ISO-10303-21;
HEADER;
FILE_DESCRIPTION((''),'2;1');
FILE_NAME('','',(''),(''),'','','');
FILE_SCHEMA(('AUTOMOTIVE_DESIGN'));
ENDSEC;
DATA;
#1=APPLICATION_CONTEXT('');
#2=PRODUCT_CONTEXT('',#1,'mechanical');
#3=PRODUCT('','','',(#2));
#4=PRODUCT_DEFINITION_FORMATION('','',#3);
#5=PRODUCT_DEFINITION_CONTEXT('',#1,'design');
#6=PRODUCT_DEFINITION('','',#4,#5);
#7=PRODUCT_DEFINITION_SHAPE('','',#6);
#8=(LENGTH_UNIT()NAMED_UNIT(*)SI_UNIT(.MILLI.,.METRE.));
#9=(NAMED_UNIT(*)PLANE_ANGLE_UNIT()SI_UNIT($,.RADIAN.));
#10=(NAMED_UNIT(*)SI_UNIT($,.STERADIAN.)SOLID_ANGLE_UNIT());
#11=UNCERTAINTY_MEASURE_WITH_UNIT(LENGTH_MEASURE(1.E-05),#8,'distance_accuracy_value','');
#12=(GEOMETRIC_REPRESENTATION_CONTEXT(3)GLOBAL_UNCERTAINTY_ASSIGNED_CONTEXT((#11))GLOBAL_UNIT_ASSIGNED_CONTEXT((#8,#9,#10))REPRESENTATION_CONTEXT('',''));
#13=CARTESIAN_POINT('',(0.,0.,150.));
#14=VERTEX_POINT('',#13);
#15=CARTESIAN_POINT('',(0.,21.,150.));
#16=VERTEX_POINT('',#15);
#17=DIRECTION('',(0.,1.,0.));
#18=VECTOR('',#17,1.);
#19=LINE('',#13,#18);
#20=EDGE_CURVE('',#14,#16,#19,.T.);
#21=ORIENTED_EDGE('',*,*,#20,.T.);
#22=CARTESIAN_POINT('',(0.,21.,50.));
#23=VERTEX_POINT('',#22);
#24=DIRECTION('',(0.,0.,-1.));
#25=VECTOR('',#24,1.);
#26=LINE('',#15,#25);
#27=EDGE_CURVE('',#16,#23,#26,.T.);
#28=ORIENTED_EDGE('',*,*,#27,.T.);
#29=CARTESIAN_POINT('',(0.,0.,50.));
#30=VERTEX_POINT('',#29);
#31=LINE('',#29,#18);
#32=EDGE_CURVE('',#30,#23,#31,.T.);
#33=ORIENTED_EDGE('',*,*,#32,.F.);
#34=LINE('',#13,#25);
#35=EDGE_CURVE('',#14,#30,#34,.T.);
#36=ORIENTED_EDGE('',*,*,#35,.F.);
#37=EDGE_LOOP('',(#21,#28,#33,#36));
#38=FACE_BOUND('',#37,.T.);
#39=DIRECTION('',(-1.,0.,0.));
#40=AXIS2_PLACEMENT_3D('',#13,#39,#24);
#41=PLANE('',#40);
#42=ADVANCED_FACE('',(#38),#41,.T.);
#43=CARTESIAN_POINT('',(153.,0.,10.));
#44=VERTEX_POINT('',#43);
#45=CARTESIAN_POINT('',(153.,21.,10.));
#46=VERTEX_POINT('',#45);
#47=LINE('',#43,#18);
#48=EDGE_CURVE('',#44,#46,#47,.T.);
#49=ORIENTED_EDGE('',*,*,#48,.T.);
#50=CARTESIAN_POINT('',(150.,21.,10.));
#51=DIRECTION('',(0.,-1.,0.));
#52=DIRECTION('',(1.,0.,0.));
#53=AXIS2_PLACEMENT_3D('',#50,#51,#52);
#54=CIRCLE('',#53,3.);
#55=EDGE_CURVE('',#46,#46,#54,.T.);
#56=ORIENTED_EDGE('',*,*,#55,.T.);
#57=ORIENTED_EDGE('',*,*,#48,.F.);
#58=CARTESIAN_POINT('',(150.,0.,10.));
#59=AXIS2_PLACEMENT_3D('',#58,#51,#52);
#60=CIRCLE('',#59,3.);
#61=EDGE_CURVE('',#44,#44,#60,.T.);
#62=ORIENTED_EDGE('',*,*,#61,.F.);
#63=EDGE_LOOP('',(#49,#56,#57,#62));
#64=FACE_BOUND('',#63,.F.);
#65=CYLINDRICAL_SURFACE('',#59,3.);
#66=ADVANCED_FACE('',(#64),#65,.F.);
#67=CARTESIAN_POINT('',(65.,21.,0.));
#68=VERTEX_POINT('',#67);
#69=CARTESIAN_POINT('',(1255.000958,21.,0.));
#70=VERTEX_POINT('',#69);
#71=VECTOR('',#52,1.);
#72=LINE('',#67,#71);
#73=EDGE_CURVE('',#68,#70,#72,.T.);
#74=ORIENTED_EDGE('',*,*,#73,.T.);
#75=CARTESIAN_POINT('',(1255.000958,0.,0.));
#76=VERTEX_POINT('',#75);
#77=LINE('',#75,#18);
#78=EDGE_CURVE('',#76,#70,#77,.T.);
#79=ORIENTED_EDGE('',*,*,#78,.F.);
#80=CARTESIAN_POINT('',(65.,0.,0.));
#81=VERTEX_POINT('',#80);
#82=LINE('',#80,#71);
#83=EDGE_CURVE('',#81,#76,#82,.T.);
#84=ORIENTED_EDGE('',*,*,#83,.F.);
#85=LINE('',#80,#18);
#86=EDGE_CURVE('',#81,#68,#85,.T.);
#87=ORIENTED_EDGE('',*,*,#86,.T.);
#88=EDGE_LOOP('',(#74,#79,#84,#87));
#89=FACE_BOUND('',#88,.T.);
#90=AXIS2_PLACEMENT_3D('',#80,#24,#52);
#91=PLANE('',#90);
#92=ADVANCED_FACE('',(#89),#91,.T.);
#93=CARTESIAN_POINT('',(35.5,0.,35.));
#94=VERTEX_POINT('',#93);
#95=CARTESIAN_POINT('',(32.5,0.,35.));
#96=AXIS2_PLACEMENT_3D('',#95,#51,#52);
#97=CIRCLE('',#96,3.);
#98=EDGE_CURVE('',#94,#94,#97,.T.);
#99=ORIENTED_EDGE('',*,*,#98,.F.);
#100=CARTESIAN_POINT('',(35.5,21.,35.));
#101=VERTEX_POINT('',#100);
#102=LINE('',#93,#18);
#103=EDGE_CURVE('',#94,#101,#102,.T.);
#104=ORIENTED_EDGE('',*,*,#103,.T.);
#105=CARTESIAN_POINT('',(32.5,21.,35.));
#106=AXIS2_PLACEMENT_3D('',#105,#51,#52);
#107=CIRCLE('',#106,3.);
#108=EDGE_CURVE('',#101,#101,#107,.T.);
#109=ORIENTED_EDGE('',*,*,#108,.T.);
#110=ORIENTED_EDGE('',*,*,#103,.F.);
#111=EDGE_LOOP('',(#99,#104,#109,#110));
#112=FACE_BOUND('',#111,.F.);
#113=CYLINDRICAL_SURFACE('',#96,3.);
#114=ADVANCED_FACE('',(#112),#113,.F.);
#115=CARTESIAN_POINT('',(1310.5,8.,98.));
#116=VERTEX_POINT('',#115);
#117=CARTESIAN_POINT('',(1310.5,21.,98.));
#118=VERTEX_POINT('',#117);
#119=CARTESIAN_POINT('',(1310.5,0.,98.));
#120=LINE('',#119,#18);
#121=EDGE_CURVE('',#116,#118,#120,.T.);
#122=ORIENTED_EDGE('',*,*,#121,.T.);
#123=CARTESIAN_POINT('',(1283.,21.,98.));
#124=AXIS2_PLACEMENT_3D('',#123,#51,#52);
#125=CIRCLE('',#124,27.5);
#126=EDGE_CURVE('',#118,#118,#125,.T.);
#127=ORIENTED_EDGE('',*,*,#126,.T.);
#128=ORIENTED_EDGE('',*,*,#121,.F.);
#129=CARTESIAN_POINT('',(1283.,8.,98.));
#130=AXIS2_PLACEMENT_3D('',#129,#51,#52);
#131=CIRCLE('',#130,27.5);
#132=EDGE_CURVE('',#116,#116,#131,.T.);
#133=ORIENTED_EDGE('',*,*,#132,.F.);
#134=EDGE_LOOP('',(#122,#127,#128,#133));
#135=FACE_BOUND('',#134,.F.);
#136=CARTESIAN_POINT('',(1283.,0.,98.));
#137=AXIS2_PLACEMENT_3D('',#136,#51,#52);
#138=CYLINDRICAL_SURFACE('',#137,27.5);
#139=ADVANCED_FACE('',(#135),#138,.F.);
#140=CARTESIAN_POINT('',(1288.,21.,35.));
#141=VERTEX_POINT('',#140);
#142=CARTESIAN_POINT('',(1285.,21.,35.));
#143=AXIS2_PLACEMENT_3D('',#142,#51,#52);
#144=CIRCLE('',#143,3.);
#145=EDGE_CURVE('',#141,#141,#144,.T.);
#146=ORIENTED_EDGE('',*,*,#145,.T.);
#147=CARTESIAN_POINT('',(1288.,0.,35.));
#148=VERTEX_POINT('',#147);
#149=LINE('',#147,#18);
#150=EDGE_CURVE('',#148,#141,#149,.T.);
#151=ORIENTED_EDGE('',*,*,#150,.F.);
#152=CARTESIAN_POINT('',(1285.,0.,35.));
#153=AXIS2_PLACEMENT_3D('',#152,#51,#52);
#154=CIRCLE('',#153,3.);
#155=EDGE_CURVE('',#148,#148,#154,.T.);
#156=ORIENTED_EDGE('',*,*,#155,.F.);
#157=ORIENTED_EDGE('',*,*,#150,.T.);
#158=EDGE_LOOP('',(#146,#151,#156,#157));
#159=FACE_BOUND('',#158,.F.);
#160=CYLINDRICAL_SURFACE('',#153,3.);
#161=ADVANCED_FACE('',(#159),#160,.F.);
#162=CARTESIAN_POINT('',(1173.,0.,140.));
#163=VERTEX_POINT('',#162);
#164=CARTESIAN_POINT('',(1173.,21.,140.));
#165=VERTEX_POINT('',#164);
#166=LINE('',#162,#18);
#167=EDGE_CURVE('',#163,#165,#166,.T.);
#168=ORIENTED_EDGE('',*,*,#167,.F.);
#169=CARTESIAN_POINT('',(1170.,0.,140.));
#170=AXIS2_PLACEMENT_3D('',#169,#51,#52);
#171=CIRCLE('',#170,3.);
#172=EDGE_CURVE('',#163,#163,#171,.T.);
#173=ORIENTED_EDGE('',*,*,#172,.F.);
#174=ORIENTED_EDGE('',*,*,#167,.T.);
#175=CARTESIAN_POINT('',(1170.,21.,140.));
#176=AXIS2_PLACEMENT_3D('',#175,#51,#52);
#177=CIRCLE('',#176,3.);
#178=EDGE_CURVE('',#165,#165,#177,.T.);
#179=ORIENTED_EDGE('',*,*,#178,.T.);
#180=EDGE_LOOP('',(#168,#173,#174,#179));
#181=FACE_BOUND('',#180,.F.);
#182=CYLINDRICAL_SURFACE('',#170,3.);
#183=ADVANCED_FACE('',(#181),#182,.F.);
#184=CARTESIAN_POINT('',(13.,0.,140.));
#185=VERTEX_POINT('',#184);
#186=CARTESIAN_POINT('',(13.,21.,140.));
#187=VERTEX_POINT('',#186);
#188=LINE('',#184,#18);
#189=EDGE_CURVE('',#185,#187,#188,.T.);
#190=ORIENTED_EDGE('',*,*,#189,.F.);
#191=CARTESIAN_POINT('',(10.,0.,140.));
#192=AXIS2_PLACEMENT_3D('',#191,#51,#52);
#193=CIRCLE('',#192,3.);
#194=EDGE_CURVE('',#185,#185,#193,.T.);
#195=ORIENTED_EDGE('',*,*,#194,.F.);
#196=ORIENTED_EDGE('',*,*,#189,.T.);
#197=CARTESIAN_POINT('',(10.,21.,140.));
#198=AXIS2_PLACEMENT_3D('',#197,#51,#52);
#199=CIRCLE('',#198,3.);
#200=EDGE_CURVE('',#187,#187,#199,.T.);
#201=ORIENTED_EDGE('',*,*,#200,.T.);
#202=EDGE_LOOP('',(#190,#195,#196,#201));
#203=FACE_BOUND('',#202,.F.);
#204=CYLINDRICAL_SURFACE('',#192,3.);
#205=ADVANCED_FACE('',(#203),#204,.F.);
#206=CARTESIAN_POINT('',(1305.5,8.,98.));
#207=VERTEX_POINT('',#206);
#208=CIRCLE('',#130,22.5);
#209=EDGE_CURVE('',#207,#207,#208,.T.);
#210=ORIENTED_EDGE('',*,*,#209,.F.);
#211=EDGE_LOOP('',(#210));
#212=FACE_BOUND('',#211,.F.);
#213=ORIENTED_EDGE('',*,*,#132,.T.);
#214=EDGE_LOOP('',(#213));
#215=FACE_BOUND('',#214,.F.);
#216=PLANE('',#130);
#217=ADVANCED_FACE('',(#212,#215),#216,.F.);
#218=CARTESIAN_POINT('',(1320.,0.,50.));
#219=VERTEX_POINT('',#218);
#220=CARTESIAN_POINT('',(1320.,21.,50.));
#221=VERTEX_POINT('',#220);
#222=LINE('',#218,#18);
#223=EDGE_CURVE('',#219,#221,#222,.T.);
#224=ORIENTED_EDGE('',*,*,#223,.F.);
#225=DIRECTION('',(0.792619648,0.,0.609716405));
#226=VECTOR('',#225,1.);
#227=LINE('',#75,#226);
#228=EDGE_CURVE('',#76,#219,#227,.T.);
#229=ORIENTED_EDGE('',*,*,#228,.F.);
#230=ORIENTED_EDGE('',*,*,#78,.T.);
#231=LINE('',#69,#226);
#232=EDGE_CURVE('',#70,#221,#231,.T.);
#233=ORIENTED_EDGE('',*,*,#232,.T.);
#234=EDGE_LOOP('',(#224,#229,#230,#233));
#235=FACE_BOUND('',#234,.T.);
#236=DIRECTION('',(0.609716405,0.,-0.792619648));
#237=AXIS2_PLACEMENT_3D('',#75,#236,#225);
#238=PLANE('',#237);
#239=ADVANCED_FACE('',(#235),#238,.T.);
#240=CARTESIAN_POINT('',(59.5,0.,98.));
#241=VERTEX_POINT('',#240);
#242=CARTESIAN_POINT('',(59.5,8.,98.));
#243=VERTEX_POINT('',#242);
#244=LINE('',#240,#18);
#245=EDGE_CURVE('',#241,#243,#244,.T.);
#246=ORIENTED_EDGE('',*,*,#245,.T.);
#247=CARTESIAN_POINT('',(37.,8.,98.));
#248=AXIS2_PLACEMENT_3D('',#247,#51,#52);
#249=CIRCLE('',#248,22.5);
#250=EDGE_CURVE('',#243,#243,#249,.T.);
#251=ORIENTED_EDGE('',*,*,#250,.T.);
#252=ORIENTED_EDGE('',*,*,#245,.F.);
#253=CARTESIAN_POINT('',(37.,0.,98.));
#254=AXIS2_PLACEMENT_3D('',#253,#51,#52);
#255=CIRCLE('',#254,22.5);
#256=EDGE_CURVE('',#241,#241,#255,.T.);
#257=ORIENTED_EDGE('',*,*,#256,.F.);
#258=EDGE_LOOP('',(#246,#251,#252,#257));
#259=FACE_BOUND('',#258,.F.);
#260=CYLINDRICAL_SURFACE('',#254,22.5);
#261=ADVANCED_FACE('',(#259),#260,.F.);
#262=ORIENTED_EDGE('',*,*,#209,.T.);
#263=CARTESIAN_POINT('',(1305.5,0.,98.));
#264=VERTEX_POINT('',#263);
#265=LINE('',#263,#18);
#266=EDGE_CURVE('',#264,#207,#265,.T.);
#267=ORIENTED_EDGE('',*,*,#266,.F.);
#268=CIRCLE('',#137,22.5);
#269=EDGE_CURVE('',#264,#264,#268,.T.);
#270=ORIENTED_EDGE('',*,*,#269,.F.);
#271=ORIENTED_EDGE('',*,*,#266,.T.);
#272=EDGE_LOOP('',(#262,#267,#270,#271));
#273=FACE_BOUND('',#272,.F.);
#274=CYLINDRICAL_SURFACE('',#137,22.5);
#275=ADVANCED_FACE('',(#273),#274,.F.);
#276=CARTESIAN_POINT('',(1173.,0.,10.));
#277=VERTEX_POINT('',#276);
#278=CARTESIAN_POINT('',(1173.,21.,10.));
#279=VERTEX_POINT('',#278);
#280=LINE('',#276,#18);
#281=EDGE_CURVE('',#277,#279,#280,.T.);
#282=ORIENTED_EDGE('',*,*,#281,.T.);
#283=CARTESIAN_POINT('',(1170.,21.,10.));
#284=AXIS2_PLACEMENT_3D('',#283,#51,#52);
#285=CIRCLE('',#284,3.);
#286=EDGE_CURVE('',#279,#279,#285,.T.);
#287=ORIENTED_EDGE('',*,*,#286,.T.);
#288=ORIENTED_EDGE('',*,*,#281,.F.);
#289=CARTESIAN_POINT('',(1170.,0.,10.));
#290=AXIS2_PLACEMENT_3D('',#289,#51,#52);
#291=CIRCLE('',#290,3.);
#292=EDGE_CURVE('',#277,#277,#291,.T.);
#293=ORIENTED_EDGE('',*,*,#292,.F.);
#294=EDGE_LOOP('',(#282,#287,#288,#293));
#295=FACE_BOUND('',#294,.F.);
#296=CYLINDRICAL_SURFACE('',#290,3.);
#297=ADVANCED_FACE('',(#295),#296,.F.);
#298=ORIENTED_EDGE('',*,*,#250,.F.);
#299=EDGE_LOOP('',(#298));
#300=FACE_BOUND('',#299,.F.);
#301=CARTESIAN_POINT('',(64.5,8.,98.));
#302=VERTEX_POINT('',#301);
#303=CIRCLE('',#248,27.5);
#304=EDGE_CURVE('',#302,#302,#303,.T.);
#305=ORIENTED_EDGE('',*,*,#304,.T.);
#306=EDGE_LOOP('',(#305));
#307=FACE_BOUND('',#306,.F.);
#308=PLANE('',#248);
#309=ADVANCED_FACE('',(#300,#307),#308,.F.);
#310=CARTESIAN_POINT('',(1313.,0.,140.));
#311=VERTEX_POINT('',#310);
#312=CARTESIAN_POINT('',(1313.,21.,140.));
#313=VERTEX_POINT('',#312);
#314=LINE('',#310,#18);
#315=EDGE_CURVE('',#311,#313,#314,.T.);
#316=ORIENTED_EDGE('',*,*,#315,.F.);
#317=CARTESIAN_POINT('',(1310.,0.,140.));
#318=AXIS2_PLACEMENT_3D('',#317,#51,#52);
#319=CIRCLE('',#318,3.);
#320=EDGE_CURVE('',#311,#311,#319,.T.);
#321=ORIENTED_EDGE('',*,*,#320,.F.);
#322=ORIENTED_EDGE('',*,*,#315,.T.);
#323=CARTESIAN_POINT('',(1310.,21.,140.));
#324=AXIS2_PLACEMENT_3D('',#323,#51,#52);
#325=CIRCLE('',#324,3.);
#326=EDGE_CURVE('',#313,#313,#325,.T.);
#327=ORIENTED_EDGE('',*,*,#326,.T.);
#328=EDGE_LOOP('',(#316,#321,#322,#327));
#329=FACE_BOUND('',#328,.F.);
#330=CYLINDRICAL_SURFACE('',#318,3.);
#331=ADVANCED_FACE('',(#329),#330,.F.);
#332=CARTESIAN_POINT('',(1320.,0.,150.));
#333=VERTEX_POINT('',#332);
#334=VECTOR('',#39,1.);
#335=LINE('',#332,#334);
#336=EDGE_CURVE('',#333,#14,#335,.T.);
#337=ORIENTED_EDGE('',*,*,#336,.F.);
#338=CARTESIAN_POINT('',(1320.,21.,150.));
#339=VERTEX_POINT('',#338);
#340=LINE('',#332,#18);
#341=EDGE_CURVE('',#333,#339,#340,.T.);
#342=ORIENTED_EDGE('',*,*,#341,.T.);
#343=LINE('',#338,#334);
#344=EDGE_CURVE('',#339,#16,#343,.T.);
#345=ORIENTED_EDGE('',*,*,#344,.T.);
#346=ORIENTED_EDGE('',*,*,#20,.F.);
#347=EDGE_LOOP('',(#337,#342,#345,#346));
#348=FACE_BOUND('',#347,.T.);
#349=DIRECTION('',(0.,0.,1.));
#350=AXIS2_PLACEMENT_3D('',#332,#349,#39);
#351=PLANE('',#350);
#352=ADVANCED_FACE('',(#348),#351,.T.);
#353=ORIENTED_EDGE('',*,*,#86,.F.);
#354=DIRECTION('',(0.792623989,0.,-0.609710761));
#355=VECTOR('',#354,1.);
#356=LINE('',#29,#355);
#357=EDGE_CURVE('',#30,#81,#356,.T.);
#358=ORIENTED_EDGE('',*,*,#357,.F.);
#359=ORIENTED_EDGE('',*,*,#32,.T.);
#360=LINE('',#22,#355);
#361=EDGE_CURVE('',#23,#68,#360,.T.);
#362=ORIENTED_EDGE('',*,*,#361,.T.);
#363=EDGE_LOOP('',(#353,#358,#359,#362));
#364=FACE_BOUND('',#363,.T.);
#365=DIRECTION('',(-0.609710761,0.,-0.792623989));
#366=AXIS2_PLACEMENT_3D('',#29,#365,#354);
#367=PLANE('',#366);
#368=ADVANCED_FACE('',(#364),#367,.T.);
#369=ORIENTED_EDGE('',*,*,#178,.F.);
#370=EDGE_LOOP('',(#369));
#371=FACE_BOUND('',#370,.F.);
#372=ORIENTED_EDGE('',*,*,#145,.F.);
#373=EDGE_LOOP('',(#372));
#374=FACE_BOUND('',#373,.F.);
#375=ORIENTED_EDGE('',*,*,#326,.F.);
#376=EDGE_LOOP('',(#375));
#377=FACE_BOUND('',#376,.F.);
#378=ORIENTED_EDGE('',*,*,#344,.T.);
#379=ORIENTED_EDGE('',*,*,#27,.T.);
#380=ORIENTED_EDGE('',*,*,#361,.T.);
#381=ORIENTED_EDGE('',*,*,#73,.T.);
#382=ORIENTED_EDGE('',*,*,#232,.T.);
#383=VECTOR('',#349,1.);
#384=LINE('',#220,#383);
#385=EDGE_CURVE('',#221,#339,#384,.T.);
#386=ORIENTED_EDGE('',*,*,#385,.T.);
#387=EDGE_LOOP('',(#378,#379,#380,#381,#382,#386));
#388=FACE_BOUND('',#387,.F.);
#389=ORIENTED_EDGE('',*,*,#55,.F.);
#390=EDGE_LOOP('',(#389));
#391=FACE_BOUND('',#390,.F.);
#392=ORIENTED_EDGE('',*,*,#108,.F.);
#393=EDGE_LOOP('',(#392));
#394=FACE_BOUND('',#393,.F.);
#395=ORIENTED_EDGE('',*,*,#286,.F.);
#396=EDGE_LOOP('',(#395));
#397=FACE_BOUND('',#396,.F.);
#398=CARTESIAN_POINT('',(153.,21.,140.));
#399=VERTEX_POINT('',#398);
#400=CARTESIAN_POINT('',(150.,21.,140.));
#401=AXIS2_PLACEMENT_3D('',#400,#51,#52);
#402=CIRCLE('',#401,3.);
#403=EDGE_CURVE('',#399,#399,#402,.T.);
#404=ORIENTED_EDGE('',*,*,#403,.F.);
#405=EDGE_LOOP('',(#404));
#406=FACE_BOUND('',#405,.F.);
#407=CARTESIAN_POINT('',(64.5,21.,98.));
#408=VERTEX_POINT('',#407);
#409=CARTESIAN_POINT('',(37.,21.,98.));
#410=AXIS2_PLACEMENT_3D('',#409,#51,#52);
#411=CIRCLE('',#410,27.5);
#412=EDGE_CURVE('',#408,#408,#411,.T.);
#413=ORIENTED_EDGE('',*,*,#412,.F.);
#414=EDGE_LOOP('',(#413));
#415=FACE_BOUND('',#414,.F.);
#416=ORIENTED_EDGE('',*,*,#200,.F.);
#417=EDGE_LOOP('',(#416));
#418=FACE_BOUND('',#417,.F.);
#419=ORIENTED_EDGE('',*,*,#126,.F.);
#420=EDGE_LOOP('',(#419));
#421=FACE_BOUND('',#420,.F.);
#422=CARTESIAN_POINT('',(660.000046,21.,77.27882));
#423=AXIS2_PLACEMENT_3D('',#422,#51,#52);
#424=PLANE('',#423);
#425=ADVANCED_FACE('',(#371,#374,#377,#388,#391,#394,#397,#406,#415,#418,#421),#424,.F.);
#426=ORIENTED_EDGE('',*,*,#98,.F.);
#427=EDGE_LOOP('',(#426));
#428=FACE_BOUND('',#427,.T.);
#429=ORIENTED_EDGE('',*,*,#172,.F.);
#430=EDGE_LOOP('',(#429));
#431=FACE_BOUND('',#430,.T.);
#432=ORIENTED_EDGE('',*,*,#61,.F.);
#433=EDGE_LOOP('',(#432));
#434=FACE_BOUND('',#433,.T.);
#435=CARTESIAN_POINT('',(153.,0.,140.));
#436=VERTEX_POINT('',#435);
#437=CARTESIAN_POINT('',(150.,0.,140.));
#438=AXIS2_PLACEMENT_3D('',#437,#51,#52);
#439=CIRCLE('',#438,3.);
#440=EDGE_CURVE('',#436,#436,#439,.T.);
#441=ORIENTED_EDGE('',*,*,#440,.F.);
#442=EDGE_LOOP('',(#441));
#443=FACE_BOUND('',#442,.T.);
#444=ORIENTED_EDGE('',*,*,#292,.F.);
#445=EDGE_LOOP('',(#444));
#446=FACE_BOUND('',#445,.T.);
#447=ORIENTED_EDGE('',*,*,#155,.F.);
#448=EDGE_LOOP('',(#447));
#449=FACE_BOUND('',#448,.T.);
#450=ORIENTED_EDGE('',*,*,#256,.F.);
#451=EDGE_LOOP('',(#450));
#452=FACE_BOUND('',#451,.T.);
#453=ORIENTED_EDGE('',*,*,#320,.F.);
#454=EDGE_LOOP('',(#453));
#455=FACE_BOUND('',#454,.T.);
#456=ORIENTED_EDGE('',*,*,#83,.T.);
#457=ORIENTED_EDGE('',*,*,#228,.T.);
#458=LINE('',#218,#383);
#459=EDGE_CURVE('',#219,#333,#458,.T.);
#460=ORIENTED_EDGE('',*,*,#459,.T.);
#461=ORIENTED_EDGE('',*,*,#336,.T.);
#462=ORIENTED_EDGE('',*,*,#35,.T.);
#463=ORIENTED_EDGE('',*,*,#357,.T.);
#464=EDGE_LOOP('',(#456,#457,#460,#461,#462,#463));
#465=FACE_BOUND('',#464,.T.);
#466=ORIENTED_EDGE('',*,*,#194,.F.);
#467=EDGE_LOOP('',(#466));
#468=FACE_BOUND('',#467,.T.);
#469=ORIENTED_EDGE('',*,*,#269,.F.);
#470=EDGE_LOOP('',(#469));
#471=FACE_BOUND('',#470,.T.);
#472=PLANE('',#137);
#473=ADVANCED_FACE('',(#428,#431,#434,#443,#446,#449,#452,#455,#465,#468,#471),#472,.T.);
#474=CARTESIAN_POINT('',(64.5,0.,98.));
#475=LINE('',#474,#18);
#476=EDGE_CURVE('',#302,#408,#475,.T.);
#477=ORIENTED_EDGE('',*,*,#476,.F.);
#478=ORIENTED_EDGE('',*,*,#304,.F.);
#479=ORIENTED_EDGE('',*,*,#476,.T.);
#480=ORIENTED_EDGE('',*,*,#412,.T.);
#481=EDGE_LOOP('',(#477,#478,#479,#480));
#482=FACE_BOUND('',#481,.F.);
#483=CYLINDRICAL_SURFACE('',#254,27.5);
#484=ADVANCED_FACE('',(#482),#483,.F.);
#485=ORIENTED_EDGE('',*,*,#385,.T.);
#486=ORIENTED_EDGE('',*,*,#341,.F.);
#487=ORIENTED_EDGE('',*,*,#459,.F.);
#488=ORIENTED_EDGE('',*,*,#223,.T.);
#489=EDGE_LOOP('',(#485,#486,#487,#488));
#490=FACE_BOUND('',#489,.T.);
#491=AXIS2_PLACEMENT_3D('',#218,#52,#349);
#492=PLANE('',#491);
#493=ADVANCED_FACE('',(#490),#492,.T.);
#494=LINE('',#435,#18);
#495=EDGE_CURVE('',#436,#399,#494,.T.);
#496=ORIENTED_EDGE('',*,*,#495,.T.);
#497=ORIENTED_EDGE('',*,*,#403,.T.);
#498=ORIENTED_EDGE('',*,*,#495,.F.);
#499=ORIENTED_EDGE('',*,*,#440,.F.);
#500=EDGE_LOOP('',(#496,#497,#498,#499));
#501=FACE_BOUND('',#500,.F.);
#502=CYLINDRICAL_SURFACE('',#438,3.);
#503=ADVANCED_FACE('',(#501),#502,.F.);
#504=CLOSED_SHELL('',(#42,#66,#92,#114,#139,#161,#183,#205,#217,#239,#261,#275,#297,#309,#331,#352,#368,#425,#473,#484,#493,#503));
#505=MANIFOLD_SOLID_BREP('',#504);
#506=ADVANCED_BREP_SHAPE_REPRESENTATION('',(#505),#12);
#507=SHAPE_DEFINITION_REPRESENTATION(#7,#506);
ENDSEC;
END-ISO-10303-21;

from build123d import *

# Parameters (mm, degrees)
F0_R     = 3
F0_R_2   = 27.5
F1_DEPTH = 21
F2_R     = 27.5
F2_R_2   = 22.5
F3_DEPTH = 8


# Not quite as in the source:
# - a feature names something its author has since deleted; it is built from what else it names


with BuildPart() as f1:
    # F0 (on Front) → F1 (new body)
    with BuildSketch(Plane.XZ):
        Polygon((0, 50), (65, 0), (160, 0), (1255.0009576903, 0), (1320, 50), (1320, 150), (160, 150), (0, 150), (0, 120), align=None)
        with Locations((150, 10)):
            Circle(F0_R, mode=Mode.SUBTRACT)
        with Locations((32.5, 35)):
            Circle(F0_R, mode=Mode.SUBTRACT)
        with Locations((1170, 10)):
            Circle(F0_R, mode=Mode.SUBTRACT)
        with Locations((1285, 35)):
            Circle(F0_R, mode=Mode.SUBTRACT)
        with Locations((37, 98)):
            Circle(F0_R_2, mode=Mode.SUBTRACT)
        with Locations((10, 140)):
            Circle(F0_R, mode=Mode.SUBTRACT)
        with Locations((150, 140)):
            Circle(F0_R, mode=Mode.SUBTRACT)
        with Locations((1283, 98)):
            Circle(F0_R_2, mode=Mode.SUBTRACT)
        with Locations((1170, 140)):
            Circle(F0_R, mode=Mode.SUBTRACT)
        with Locations((1310, 140)):
            Circle(F0_R, mode=Mode.SUBTRACT)
    extrude(amount=-F1_DEPTH)

    # F2 (on face) → F3 (join)
    with BuildSketch(Plane.XZ):
        with Locations((1283, 98)):
            Circle(F2_R)
        with Locations((1283, 98)):
            Circle(F2_R_2, mode=Mode.SUBTRACT)
        with Locations((37, 98)):
            Circle(F2_R)
        with Locations((37, 98)):
            Circle(F2_R_2, mode=Mode.SUBTRACT)
    extrude(amount=-F3_DEPTH)


solid = f1.part
